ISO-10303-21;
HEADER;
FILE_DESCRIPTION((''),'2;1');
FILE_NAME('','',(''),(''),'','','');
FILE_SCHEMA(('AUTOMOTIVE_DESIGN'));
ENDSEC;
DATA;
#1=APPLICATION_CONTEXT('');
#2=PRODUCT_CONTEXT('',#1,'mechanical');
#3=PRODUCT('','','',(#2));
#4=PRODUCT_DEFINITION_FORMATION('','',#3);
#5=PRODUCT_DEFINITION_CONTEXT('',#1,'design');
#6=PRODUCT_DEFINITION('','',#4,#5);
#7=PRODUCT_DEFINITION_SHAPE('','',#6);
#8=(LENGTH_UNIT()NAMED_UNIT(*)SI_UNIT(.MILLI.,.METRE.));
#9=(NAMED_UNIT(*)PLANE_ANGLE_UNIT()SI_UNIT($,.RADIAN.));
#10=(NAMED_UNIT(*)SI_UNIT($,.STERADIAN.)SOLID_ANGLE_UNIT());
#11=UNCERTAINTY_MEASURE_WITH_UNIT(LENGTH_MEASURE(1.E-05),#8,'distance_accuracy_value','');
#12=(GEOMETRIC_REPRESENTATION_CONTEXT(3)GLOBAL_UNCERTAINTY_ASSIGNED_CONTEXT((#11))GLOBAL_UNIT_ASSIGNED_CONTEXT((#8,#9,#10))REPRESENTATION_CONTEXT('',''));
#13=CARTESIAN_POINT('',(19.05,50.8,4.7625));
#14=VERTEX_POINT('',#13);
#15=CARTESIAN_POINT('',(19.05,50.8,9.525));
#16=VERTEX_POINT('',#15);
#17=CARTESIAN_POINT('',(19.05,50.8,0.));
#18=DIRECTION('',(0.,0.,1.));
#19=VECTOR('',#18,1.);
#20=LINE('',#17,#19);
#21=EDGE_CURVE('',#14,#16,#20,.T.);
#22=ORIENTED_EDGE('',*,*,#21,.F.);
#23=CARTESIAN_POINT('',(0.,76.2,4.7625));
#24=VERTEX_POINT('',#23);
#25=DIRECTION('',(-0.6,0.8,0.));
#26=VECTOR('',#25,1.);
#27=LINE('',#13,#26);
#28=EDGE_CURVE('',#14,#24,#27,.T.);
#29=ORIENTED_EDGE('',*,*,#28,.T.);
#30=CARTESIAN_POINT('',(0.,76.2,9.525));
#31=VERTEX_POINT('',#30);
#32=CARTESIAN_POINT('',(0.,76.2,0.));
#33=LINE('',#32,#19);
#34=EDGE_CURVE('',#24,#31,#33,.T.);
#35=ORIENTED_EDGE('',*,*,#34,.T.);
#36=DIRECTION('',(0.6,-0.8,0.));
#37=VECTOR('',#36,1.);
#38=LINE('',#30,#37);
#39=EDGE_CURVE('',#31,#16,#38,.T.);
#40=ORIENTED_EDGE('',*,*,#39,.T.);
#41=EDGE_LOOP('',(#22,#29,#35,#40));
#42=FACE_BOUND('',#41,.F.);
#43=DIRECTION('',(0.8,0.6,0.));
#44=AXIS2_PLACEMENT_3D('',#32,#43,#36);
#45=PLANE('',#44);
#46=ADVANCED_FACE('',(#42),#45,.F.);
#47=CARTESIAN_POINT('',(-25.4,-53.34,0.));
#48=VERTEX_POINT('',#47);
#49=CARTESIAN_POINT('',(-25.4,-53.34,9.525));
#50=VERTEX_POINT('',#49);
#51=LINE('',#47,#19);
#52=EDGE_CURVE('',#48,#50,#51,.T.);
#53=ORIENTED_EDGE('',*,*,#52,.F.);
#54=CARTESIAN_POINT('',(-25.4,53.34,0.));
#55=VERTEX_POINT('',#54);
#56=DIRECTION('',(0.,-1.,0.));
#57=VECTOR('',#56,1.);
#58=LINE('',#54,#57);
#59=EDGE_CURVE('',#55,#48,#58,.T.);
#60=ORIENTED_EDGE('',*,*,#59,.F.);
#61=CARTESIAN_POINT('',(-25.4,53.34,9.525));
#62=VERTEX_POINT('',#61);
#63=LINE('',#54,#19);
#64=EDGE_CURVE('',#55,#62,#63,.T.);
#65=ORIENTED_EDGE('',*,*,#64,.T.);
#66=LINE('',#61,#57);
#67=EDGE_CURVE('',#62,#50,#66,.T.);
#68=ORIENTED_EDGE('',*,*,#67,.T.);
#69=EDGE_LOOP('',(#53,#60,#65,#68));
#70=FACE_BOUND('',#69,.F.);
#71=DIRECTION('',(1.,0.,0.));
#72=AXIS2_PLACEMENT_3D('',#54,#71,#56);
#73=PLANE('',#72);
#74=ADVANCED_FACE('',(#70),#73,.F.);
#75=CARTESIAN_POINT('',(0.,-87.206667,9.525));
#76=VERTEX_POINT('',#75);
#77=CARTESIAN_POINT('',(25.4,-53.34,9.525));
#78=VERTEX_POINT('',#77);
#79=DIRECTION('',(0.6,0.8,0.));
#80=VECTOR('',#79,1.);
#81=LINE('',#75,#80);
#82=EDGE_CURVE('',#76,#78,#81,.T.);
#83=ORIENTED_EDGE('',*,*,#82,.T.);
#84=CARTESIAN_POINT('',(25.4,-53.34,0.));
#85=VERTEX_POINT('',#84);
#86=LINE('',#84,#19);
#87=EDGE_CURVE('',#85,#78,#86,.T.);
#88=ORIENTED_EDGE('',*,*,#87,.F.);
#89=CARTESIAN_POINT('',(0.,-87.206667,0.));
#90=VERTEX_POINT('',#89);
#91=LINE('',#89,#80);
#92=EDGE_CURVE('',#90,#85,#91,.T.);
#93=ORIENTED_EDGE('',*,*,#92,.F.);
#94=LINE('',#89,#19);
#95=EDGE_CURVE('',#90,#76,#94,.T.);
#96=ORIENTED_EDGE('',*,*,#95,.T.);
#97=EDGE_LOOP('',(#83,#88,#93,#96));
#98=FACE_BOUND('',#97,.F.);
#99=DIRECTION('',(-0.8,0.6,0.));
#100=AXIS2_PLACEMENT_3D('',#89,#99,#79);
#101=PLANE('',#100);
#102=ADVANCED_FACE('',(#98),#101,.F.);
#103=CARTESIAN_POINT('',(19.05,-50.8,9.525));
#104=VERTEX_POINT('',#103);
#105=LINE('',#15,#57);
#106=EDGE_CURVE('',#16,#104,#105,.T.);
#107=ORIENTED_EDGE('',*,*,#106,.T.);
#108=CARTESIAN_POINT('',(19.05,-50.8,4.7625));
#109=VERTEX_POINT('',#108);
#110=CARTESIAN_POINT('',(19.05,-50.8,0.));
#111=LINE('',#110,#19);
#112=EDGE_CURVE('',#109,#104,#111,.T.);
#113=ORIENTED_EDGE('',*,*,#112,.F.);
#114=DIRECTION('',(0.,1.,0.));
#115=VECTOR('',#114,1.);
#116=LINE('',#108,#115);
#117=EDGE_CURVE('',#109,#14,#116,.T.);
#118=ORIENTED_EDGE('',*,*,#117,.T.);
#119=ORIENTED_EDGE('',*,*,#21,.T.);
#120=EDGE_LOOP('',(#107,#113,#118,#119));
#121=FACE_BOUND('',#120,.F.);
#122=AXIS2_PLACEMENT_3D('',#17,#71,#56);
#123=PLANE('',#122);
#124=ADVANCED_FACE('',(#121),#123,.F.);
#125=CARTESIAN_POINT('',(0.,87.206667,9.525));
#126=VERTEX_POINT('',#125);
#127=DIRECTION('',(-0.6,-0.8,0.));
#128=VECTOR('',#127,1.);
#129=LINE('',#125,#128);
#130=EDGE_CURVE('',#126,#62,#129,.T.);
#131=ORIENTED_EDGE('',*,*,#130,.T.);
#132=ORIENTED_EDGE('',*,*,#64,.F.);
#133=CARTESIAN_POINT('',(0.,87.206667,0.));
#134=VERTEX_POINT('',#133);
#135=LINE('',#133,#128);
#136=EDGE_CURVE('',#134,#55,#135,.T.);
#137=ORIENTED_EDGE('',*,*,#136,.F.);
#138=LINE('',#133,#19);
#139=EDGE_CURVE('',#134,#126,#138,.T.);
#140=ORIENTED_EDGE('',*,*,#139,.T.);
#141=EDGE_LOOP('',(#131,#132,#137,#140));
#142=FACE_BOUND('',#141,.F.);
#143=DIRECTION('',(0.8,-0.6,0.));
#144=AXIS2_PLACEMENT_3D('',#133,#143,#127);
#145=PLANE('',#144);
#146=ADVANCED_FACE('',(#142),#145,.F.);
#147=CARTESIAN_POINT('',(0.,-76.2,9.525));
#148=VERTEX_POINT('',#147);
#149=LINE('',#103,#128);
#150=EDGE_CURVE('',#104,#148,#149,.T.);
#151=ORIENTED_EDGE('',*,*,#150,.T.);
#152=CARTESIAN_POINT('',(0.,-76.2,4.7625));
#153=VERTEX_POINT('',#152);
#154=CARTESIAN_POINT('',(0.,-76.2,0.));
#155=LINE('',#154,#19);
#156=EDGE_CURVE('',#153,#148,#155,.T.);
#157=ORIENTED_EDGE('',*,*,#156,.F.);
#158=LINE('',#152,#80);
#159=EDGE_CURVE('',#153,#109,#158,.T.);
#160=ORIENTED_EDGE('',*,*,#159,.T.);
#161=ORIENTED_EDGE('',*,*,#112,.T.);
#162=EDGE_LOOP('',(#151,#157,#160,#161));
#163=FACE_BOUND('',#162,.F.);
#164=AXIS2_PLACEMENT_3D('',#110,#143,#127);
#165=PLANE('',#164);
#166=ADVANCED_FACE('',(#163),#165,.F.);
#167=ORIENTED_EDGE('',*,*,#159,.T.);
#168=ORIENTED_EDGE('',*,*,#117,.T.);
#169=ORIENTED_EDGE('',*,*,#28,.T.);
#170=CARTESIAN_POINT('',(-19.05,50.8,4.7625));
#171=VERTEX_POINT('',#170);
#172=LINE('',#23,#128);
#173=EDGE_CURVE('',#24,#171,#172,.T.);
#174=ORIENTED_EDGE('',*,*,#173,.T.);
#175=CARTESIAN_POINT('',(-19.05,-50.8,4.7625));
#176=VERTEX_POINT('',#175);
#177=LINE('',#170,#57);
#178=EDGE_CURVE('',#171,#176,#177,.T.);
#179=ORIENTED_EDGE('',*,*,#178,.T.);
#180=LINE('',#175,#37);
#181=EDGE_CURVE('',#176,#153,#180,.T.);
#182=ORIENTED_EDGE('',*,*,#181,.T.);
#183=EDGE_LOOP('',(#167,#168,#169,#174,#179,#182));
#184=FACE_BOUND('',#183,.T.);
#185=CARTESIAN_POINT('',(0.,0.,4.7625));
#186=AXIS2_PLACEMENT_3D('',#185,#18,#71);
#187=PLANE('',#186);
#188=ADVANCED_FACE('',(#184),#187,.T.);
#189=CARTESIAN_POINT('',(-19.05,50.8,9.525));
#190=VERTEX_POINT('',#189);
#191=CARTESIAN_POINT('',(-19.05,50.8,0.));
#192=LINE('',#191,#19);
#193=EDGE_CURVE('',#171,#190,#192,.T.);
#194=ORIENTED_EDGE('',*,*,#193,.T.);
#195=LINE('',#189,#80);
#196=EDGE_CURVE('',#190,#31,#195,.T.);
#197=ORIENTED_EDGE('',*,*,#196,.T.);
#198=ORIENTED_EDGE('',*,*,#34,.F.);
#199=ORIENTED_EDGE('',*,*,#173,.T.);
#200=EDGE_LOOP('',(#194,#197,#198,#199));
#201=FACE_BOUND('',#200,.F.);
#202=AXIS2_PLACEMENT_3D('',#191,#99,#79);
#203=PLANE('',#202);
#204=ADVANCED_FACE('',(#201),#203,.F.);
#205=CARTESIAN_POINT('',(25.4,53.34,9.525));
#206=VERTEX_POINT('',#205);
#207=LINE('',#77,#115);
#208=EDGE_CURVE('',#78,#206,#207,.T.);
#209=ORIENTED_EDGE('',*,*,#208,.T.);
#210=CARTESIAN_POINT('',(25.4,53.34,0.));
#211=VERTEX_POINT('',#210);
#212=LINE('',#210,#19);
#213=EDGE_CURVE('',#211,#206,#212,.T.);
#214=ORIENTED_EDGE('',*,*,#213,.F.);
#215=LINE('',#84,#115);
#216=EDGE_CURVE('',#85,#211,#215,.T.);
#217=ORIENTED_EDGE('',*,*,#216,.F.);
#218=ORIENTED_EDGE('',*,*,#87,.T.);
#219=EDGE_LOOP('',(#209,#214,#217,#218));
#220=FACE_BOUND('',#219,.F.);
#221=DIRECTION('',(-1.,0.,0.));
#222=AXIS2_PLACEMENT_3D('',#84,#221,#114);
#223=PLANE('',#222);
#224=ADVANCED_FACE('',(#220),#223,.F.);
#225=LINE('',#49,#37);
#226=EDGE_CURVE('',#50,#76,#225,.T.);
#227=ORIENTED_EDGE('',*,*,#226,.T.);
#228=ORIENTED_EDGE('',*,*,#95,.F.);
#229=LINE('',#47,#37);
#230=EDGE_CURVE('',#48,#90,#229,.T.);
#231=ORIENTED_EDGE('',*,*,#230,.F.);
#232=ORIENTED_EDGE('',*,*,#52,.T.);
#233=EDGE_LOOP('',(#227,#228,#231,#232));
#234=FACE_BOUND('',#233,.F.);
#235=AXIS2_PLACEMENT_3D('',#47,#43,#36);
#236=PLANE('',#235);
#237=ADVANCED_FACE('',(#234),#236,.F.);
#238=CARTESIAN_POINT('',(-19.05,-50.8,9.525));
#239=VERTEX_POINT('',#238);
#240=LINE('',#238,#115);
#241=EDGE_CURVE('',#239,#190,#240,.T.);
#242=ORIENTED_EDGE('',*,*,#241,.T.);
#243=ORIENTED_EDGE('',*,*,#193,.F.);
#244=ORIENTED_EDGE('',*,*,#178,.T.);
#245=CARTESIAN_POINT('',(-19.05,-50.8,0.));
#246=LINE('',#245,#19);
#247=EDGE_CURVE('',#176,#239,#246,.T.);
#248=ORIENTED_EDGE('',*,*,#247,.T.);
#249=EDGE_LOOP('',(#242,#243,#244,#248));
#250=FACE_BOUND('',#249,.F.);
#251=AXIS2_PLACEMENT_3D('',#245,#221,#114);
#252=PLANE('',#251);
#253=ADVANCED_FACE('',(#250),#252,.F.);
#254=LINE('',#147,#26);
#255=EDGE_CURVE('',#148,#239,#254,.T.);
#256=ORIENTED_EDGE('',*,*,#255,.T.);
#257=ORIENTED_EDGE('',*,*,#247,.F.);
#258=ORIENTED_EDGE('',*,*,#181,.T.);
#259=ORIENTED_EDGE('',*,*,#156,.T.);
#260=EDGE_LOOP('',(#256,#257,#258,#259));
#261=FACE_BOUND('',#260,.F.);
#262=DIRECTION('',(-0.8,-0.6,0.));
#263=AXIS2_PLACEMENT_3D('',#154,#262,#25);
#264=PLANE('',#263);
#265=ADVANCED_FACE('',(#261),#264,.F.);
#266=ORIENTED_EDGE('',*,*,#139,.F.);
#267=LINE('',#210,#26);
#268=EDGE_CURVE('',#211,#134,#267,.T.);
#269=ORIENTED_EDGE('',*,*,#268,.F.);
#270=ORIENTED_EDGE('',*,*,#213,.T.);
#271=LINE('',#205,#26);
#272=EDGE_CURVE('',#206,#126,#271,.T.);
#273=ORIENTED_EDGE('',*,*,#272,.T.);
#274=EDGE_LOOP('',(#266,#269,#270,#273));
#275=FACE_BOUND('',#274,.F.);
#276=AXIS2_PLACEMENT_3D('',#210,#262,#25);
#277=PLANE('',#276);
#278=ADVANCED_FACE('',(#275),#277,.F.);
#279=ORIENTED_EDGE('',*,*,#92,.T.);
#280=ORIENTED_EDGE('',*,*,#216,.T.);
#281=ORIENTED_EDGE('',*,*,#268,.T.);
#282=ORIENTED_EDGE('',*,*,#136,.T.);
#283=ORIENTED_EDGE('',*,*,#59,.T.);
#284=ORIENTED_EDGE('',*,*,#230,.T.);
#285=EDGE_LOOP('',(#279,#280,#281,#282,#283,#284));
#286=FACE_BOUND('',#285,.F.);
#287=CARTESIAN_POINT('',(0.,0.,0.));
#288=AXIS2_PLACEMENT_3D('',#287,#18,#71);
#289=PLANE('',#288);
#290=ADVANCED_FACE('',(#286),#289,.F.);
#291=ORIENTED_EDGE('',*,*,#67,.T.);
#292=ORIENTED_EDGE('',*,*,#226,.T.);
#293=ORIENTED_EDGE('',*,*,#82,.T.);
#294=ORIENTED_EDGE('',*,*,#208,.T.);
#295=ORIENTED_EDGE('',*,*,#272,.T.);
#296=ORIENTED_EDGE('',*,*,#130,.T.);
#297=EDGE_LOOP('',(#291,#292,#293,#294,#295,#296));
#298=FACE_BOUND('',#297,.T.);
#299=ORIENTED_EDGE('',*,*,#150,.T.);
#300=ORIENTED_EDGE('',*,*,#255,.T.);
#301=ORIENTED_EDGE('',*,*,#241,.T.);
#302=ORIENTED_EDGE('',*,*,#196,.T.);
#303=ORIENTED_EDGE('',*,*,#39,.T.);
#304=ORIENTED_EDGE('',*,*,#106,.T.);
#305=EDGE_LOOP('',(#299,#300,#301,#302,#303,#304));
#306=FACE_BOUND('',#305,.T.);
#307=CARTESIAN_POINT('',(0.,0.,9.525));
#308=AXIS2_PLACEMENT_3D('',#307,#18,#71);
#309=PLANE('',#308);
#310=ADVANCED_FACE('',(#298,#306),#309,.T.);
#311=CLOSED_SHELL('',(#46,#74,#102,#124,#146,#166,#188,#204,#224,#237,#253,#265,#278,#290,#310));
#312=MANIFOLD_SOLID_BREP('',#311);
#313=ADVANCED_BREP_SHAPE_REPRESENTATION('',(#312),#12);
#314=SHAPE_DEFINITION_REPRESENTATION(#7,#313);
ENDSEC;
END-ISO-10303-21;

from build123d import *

# Parameters (mm, degrees)
F1_DEPTH = 9.525
F2_DEPTH = 4.7625


# Not quite as in the source:
# - a feature names something its author has since deleted; it is built from what else it names


with BuildPart() as f1:
    # F0 (on Top) → F1 (new body)
    with BuildSketch(Plane.XY):
        Polygon((0, 87.2066666667), (-25.4, 53.34), (-25.4, -53.34), (0, -87.2066666667), (25.4, -53.34), (25.4, 53.34), align=None)
        Polygon((-19.05, -50.8), (-19.05, 50.8), (0, 76.2), (19.05, 50.8), (19.05, -50.8), (0, -76.2), align=None, mode=Mode.SUBTRACT)
    extrude(amount=F1_DEPTH)

    # F0 (on Top) → F2 (join)
    with BuildSketch(Plane.XY):
        Polygon((0, 76.2), (-19.05, 50.8), (-19.05, -50.8), (0, -76.2), (19.05, -50.8), (19.05, 50.8), align=None)
    extrude(amount=F2_DEPTH)


solid = f1.part
